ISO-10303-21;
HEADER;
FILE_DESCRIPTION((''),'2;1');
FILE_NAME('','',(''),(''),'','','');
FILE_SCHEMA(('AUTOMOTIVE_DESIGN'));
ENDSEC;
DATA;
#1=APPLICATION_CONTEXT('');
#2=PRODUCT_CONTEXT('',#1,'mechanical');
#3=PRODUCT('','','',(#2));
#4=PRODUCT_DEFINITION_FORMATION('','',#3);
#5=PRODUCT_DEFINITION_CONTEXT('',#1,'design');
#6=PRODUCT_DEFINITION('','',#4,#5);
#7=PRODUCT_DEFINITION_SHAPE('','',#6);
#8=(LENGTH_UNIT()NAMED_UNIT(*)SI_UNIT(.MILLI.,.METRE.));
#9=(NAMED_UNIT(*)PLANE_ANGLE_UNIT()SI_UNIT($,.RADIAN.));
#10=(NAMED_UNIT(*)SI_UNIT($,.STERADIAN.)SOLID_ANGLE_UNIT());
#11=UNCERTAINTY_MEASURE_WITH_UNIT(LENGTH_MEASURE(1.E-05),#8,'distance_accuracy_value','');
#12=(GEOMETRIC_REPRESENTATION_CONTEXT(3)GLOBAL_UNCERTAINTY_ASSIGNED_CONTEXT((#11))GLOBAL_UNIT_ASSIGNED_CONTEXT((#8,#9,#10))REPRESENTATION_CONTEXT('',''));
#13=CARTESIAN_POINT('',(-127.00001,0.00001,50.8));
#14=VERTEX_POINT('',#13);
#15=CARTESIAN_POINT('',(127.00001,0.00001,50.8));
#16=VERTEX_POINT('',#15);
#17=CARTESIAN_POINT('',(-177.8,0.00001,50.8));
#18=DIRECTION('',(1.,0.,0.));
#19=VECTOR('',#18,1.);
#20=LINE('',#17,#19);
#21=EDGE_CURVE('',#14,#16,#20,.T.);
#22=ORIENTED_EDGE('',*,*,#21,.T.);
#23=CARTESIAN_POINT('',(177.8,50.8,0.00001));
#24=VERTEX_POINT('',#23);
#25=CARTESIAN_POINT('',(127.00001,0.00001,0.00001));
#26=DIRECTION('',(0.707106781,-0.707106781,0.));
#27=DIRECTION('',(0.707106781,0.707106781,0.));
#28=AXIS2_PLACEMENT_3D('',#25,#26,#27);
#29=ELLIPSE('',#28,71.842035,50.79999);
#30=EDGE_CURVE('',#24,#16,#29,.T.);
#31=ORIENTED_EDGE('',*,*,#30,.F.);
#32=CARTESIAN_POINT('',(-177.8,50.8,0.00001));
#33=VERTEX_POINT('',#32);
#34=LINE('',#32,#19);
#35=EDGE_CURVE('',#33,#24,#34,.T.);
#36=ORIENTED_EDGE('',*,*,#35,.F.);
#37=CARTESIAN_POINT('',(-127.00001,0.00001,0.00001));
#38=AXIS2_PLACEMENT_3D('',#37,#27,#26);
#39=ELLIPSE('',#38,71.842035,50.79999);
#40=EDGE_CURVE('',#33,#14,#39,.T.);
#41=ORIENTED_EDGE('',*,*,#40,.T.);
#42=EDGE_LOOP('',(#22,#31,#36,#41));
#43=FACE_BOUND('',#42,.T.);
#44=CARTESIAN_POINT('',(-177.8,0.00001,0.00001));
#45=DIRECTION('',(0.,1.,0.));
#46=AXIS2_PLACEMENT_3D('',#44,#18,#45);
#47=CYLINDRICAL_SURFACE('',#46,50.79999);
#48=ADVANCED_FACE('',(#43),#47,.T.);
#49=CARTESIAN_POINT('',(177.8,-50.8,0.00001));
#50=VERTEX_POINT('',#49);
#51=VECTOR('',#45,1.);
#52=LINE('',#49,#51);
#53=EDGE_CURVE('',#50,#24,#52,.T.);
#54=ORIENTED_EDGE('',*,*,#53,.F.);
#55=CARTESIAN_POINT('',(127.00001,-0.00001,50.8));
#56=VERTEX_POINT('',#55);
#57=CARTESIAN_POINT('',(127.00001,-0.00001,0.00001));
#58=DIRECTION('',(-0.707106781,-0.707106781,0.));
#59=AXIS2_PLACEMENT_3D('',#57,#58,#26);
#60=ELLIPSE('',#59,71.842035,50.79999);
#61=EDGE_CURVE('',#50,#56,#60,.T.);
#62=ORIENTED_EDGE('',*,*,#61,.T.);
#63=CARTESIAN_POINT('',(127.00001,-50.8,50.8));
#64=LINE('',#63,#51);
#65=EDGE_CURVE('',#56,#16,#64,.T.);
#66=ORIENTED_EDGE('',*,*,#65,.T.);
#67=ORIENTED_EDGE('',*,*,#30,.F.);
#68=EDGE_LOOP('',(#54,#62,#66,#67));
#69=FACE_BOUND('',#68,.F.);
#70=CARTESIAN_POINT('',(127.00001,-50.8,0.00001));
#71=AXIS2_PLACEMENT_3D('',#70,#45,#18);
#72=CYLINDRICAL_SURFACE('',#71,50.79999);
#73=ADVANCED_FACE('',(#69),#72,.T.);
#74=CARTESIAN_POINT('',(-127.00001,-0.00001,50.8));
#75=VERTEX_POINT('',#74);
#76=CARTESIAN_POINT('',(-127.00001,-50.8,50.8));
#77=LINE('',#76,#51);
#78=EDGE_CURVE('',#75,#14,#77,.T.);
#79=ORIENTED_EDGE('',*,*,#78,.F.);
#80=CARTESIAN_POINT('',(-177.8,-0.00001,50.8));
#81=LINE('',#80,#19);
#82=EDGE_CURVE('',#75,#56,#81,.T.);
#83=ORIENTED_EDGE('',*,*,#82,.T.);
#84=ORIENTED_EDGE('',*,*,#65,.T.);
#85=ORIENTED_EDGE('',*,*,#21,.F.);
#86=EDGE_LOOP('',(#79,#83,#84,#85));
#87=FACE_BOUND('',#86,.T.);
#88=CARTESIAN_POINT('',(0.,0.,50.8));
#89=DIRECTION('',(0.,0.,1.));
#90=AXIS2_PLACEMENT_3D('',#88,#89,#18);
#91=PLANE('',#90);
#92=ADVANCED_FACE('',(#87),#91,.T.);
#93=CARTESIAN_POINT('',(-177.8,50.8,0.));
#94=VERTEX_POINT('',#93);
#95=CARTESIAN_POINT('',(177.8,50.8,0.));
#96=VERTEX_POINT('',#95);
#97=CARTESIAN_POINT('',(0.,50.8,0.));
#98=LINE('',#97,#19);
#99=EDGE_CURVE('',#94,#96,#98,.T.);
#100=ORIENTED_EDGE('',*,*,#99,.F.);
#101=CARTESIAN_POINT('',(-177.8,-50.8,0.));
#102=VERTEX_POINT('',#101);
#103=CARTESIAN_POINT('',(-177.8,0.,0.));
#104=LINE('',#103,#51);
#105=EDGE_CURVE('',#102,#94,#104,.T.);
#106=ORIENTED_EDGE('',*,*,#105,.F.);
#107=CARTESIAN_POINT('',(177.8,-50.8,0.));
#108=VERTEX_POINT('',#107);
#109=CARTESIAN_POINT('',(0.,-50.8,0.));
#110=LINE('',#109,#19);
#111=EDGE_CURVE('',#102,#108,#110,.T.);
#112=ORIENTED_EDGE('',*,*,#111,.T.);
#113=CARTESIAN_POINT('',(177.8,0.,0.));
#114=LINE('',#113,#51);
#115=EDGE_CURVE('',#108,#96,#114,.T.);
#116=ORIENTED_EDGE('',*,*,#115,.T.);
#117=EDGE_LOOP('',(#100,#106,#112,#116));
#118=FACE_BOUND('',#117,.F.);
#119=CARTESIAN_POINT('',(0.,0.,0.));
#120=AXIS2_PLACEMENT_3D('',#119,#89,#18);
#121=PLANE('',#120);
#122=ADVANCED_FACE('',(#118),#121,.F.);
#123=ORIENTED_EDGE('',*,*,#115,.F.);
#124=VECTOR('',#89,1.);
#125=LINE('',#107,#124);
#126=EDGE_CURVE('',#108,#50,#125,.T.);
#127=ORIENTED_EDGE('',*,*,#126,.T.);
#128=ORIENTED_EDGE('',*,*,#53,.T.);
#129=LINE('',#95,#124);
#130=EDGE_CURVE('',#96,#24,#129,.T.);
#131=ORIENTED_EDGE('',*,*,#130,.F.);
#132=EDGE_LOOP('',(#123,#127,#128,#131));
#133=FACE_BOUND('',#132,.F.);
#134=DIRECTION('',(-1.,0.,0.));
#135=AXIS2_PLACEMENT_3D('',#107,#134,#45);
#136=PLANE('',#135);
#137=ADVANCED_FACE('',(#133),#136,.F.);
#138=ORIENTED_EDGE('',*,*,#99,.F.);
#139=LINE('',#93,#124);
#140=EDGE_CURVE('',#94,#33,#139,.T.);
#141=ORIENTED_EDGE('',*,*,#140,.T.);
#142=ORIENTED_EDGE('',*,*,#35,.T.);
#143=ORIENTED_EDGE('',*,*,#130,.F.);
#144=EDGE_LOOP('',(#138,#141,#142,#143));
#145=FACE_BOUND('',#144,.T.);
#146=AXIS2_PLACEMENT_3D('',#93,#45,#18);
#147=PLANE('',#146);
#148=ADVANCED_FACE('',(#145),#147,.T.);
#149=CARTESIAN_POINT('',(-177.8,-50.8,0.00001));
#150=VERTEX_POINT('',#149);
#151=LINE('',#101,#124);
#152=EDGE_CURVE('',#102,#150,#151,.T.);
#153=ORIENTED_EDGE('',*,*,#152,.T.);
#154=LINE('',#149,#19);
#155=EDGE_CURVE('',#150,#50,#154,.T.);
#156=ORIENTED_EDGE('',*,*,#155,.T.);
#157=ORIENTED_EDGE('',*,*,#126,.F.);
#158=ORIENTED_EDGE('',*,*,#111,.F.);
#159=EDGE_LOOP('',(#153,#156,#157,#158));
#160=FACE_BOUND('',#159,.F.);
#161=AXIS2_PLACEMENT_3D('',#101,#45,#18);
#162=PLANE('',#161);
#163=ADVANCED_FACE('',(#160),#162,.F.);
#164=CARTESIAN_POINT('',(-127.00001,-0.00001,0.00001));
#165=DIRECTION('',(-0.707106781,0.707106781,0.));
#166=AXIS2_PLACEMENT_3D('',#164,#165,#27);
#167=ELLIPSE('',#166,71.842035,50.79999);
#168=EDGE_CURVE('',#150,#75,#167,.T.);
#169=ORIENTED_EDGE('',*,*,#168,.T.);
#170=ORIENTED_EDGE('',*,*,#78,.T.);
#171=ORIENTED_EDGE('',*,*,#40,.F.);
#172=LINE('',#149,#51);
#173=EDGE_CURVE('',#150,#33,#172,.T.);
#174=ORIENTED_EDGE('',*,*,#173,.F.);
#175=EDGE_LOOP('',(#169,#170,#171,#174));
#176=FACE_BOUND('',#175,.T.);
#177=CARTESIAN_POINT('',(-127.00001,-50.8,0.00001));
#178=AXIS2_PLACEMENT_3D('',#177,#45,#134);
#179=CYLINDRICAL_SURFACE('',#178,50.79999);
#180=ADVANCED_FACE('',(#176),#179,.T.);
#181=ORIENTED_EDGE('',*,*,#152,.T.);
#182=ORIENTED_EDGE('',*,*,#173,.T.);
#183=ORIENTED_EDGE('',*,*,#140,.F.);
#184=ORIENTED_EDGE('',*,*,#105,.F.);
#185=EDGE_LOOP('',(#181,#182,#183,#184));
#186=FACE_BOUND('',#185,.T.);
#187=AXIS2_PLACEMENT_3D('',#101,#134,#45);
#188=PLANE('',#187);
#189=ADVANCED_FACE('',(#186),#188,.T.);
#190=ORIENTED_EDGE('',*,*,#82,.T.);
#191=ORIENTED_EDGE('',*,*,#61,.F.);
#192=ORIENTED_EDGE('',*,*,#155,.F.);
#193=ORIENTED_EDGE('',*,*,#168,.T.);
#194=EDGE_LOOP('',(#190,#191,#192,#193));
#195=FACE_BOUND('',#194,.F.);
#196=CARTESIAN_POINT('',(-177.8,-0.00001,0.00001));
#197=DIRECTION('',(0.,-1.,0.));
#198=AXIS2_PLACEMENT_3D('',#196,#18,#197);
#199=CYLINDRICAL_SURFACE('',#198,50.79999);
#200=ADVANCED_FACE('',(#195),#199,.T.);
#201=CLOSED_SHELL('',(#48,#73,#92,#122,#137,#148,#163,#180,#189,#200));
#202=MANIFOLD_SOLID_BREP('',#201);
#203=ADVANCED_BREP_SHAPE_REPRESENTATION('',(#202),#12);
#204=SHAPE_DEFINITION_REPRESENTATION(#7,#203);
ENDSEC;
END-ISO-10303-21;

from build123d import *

# Parameters (mm, degrees)
F0_W     = 355.6
F0_H     = 101.6
F1_DEPTH = 50.8
F2_R     = 50.79999


# Not quite as in the source:
# - a fillet or chamfer is up to 0.001 mm smaller than in the source, because OpenCascade refuses the exact size


with BuildPart() as f1:
    # F0 (on Top) → F1 (new body)
    with BuildSketch(Plane.XY):
        Rectangle(F0_W, F0_H)
    extrude(amount=F1_DEPTH)

    # F2 (radius 50.8 in the source; OpenCascade refuses exactly that, so slightly less here)
    f2_edges = [f1.edges().sort_by_distance(p)[0] for p in [
        (0, 50.8, 50.8),
        (0, -50.8, 50.8),
        (177.8, 0, 50.8),
        (-177.8, 0, 50.8),
    ]]
    fillet(f2_edges, radius=F2_R)


solid = f1.part
